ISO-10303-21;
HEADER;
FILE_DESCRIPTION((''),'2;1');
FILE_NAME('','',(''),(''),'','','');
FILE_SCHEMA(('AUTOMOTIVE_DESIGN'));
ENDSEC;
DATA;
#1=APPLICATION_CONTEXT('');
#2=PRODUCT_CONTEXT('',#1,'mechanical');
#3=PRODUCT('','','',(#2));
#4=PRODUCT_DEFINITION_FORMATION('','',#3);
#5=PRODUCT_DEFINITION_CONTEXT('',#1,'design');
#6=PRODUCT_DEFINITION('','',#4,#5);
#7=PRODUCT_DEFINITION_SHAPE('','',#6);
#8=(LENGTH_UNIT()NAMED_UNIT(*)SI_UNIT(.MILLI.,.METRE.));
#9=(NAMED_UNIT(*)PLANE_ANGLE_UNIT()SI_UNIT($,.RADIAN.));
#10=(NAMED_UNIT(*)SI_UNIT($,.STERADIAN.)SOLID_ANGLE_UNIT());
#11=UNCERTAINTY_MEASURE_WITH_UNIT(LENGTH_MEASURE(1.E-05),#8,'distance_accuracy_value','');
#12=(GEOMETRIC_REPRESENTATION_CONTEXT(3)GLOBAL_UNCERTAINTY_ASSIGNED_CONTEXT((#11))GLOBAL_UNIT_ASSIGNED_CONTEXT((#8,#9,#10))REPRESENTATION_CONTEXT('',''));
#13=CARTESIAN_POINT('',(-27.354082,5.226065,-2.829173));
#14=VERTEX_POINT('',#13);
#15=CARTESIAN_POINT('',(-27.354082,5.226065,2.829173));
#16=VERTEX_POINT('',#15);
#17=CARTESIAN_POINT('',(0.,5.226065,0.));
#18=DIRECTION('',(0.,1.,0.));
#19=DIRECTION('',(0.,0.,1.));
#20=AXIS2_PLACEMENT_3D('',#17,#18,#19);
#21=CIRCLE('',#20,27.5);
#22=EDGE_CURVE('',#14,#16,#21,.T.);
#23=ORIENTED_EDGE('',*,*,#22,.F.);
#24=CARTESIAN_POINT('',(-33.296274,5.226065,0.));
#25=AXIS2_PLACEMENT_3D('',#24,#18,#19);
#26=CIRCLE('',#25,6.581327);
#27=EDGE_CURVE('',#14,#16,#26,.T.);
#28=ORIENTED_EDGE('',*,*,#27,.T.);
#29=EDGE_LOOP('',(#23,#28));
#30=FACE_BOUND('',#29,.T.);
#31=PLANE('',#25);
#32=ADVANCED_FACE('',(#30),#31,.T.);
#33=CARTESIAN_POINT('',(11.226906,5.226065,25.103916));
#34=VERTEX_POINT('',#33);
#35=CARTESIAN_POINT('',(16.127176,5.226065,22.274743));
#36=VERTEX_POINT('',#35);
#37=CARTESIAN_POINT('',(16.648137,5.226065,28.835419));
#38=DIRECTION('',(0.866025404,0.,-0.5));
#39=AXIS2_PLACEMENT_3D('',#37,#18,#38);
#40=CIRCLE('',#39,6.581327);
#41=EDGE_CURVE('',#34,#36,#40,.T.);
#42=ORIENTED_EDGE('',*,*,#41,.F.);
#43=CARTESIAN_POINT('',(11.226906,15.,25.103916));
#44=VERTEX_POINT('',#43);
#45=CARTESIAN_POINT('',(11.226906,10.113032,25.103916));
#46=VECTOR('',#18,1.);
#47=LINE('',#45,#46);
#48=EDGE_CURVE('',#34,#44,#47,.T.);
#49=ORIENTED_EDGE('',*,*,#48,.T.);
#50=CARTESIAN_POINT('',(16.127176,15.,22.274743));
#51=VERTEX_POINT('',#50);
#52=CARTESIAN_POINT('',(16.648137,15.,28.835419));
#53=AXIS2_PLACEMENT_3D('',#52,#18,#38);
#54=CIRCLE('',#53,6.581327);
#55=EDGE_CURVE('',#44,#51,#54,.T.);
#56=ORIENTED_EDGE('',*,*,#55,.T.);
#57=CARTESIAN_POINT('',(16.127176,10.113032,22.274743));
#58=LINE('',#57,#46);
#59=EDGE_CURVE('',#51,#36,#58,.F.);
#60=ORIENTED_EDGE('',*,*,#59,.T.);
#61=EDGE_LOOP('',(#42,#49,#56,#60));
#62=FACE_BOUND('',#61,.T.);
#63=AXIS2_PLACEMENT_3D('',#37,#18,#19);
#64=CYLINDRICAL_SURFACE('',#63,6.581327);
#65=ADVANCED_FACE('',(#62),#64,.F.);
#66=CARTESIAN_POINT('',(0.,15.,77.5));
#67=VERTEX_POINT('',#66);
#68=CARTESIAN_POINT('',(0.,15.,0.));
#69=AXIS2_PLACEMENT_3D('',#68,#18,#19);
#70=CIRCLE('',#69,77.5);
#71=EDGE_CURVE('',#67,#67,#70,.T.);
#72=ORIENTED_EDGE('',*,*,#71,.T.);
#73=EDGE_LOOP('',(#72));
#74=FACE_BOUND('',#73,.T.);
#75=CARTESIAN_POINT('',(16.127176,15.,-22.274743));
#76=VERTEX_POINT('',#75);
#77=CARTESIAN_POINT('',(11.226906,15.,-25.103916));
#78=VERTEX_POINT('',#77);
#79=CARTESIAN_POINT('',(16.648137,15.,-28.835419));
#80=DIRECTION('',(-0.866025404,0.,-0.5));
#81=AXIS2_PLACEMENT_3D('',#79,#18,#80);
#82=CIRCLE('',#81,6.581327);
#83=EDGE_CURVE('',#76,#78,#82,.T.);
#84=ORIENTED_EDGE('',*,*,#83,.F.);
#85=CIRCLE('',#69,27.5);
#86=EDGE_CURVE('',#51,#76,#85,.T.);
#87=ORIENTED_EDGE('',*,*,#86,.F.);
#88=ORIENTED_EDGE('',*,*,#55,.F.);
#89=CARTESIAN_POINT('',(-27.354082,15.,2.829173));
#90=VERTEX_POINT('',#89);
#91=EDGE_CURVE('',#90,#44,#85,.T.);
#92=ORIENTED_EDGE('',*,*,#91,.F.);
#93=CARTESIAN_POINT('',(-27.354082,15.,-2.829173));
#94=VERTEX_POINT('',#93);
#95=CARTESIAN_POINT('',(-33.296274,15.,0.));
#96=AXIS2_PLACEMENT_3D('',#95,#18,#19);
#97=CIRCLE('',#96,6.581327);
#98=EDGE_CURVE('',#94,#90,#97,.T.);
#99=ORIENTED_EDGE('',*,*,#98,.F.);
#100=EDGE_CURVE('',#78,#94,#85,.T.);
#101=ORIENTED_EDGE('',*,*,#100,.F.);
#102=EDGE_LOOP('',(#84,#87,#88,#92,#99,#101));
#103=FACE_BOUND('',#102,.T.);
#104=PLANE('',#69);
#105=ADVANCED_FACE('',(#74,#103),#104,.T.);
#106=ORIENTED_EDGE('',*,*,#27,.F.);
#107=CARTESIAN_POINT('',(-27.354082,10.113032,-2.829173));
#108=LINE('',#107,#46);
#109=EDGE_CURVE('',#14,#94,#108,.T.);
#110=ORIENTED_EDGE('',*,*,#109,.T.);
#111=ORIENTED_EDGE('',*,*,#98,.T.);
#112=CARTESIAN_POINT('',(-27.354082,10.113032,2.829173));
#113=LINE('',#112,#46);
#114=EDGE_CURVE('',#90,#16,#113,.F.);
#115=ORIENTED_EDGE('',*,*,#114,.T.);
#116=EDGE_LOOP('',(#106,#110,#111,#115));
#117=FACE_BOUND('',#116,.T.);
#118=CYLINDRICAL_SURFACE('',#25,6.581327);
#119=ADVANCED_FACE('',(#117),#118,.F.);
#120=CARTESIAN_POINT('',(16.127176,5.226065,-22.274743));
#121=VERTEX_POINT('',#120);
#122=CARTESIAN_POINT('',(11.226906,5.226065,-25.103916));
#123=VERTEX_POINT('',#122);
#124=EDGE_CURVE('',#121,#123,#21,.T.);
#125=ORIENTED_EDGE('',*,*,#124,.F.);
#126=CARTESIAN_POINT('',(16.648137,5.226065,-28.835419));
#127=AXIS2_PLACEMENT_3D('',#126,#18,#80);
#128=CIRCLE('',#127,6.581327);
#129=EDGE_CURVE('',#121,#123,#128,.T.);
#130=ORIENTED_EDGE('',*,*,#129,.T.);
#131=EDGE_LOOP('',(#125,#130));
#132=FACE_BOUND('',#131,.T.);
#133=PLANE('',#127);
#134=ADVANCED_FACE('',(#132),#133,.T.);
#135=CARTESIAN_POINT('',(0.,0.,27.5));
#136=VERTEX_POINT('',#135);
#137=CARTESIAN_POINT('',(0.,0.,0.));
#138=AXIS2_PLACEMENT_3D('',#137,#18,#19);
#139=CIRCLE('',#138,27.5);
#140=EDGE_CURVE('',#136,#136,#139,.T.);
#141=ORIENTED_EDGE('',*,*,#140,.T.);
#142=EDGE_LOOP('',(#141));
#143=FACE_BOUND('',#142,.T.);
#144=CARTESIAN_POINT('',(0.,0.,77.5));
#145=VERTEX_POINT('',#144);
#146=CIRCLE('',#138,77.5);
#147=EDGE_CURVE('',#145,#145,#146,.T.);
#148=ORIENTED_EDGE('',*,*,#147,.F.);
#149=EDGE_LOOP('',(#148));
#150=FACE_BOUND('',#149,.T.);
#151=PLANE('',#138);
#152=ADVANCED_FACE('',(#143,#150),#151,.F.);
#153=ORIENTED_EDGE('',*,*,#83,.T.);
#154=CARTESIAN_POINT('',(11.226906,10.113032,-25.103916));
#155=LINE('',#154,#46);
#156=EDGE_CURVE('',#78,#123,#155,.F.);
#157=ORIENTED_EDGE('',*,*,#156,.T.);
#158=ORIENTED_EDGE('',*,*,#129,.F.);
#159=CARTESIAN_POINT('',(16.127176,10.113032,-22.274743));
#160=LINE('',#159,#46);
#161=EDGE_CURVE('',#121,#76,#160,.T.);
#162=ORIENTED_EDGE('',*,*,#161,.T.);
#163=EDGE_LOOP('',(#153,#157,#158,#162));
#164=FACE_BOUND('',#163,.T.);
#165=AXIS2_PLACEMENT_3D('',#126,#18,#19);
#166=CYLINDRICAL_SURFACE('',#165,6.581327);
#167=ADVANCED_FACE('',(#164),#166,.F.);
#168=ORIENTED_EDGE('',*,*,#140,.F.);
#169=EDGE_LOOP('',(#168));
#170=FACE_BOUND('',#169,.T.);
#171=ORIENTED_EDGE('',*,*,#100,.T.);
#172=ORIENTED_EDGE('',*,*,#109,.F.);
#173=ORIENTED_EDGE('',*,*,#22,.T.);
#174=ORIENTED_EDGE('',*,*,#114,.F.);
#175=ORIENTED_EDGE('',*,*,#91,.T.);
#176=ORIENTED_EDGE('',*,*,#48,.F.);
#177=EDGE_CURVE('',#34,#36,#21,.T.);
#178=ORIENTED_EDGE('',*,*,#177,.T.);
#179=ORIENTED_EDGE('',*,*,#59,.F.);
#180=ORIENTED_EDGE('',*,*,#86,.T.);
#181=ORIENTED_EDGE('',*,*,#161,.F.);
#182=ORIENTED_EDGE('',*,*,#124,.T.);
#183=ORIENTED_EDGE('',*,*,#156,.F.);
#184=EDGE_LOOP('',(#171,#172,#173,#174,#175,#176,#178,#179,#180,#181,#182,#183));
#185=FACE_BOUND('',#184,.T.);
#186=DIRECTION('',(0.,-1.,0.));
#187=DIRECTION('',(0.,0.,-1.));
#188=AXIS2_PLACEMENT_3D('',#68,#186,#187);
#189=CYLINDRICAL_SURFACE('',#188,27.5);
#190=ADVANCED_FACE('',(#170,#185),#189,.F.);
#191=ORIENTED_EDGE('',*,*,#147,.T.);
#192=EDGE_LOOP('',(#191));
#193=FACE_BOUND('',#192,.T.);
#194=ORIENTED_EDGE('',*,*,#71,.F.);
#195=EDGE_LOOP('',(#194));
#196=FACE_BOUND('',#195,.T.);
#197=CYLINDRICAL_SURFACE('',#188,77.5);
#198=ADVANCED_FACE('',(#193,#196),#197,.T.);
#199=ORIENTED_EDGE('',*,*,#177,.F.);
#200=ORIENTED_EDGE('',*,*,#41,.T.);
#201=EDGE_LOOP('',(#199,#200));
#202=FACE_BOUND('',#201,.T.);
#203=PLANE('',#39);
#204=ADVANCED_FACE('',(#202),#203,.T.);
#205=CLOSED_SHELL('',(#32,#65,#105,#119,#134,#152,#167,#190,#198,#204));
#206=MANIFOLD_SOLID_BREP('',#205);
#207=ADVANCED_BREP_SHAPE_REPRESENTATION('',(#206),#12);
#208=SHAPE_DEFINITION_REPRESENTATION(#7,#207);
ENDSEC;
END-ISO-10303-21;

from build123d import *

# Parameters (mm, degrees)
SKETCH1_R           = 77.5
BOSS_EXTRUDE1_DEPTH = 15
SKETCH2_R           = 27.5
CUT_EXTRUDE1_DEPTH  = 111.623234449
SKETCH3_R           = 6.581326796
CUT_EXTRUDE2_DEPTH  = 9.773935142
CIRPATTERN1_COUNT   = 3


with BuildPart() as part:
    # Sketch1 → Boss-Extrude1 (new body)
    with BuildSketch(Plane(origin=(0, 0, 0), x_dir=(1, 0, 0), z_dir=(0, 1, 0))):
        Circle(SKETCH1_R)
    extrude(amount=BOSS_EXTRUDE1_DEPTH)

    # Sketch2 → Cut-Extrude1 (cut, through all)
    with BuildSketch(Plane(origin=(0, 0, 0), x_dir=(1, 0, 0), z_dir=(0, 1, 0))):
        Circle(SKETCH2_R)
    extrude(amount=CUT_EXTRUDE1_DEPTH, mode=Mode.SUBTRACT)

    # Sketch3 → Cut-Extrude2 (cut)
    with BuildSketch(Plane(origin=(0, 15, 0), x_dir=(1, 0, 0), z_dir=(0, 1, 0))):
        with Locations((-33.296273578, 0)):
            Circle(SKETCH3_R)
    cut_extrude2 = extrude(amount=-CUT_EXTRUDE2_DEPTH, mode=Mode.SUBTRACT)

    # CirPattern1: Cut-Extrude2 ×3 about axis
    cirpattern1_axis = Axis((0, 0, 0), (0, 1, 0))
    for i in range(1, CIRPATTERN1_COUNT):
        add(cut_extrude2.rotate(cirpattern1_axis, i * 360 / CIRPATTERN1_COUNT), mode=Mode.SUBTRACT)


solid = part.part
